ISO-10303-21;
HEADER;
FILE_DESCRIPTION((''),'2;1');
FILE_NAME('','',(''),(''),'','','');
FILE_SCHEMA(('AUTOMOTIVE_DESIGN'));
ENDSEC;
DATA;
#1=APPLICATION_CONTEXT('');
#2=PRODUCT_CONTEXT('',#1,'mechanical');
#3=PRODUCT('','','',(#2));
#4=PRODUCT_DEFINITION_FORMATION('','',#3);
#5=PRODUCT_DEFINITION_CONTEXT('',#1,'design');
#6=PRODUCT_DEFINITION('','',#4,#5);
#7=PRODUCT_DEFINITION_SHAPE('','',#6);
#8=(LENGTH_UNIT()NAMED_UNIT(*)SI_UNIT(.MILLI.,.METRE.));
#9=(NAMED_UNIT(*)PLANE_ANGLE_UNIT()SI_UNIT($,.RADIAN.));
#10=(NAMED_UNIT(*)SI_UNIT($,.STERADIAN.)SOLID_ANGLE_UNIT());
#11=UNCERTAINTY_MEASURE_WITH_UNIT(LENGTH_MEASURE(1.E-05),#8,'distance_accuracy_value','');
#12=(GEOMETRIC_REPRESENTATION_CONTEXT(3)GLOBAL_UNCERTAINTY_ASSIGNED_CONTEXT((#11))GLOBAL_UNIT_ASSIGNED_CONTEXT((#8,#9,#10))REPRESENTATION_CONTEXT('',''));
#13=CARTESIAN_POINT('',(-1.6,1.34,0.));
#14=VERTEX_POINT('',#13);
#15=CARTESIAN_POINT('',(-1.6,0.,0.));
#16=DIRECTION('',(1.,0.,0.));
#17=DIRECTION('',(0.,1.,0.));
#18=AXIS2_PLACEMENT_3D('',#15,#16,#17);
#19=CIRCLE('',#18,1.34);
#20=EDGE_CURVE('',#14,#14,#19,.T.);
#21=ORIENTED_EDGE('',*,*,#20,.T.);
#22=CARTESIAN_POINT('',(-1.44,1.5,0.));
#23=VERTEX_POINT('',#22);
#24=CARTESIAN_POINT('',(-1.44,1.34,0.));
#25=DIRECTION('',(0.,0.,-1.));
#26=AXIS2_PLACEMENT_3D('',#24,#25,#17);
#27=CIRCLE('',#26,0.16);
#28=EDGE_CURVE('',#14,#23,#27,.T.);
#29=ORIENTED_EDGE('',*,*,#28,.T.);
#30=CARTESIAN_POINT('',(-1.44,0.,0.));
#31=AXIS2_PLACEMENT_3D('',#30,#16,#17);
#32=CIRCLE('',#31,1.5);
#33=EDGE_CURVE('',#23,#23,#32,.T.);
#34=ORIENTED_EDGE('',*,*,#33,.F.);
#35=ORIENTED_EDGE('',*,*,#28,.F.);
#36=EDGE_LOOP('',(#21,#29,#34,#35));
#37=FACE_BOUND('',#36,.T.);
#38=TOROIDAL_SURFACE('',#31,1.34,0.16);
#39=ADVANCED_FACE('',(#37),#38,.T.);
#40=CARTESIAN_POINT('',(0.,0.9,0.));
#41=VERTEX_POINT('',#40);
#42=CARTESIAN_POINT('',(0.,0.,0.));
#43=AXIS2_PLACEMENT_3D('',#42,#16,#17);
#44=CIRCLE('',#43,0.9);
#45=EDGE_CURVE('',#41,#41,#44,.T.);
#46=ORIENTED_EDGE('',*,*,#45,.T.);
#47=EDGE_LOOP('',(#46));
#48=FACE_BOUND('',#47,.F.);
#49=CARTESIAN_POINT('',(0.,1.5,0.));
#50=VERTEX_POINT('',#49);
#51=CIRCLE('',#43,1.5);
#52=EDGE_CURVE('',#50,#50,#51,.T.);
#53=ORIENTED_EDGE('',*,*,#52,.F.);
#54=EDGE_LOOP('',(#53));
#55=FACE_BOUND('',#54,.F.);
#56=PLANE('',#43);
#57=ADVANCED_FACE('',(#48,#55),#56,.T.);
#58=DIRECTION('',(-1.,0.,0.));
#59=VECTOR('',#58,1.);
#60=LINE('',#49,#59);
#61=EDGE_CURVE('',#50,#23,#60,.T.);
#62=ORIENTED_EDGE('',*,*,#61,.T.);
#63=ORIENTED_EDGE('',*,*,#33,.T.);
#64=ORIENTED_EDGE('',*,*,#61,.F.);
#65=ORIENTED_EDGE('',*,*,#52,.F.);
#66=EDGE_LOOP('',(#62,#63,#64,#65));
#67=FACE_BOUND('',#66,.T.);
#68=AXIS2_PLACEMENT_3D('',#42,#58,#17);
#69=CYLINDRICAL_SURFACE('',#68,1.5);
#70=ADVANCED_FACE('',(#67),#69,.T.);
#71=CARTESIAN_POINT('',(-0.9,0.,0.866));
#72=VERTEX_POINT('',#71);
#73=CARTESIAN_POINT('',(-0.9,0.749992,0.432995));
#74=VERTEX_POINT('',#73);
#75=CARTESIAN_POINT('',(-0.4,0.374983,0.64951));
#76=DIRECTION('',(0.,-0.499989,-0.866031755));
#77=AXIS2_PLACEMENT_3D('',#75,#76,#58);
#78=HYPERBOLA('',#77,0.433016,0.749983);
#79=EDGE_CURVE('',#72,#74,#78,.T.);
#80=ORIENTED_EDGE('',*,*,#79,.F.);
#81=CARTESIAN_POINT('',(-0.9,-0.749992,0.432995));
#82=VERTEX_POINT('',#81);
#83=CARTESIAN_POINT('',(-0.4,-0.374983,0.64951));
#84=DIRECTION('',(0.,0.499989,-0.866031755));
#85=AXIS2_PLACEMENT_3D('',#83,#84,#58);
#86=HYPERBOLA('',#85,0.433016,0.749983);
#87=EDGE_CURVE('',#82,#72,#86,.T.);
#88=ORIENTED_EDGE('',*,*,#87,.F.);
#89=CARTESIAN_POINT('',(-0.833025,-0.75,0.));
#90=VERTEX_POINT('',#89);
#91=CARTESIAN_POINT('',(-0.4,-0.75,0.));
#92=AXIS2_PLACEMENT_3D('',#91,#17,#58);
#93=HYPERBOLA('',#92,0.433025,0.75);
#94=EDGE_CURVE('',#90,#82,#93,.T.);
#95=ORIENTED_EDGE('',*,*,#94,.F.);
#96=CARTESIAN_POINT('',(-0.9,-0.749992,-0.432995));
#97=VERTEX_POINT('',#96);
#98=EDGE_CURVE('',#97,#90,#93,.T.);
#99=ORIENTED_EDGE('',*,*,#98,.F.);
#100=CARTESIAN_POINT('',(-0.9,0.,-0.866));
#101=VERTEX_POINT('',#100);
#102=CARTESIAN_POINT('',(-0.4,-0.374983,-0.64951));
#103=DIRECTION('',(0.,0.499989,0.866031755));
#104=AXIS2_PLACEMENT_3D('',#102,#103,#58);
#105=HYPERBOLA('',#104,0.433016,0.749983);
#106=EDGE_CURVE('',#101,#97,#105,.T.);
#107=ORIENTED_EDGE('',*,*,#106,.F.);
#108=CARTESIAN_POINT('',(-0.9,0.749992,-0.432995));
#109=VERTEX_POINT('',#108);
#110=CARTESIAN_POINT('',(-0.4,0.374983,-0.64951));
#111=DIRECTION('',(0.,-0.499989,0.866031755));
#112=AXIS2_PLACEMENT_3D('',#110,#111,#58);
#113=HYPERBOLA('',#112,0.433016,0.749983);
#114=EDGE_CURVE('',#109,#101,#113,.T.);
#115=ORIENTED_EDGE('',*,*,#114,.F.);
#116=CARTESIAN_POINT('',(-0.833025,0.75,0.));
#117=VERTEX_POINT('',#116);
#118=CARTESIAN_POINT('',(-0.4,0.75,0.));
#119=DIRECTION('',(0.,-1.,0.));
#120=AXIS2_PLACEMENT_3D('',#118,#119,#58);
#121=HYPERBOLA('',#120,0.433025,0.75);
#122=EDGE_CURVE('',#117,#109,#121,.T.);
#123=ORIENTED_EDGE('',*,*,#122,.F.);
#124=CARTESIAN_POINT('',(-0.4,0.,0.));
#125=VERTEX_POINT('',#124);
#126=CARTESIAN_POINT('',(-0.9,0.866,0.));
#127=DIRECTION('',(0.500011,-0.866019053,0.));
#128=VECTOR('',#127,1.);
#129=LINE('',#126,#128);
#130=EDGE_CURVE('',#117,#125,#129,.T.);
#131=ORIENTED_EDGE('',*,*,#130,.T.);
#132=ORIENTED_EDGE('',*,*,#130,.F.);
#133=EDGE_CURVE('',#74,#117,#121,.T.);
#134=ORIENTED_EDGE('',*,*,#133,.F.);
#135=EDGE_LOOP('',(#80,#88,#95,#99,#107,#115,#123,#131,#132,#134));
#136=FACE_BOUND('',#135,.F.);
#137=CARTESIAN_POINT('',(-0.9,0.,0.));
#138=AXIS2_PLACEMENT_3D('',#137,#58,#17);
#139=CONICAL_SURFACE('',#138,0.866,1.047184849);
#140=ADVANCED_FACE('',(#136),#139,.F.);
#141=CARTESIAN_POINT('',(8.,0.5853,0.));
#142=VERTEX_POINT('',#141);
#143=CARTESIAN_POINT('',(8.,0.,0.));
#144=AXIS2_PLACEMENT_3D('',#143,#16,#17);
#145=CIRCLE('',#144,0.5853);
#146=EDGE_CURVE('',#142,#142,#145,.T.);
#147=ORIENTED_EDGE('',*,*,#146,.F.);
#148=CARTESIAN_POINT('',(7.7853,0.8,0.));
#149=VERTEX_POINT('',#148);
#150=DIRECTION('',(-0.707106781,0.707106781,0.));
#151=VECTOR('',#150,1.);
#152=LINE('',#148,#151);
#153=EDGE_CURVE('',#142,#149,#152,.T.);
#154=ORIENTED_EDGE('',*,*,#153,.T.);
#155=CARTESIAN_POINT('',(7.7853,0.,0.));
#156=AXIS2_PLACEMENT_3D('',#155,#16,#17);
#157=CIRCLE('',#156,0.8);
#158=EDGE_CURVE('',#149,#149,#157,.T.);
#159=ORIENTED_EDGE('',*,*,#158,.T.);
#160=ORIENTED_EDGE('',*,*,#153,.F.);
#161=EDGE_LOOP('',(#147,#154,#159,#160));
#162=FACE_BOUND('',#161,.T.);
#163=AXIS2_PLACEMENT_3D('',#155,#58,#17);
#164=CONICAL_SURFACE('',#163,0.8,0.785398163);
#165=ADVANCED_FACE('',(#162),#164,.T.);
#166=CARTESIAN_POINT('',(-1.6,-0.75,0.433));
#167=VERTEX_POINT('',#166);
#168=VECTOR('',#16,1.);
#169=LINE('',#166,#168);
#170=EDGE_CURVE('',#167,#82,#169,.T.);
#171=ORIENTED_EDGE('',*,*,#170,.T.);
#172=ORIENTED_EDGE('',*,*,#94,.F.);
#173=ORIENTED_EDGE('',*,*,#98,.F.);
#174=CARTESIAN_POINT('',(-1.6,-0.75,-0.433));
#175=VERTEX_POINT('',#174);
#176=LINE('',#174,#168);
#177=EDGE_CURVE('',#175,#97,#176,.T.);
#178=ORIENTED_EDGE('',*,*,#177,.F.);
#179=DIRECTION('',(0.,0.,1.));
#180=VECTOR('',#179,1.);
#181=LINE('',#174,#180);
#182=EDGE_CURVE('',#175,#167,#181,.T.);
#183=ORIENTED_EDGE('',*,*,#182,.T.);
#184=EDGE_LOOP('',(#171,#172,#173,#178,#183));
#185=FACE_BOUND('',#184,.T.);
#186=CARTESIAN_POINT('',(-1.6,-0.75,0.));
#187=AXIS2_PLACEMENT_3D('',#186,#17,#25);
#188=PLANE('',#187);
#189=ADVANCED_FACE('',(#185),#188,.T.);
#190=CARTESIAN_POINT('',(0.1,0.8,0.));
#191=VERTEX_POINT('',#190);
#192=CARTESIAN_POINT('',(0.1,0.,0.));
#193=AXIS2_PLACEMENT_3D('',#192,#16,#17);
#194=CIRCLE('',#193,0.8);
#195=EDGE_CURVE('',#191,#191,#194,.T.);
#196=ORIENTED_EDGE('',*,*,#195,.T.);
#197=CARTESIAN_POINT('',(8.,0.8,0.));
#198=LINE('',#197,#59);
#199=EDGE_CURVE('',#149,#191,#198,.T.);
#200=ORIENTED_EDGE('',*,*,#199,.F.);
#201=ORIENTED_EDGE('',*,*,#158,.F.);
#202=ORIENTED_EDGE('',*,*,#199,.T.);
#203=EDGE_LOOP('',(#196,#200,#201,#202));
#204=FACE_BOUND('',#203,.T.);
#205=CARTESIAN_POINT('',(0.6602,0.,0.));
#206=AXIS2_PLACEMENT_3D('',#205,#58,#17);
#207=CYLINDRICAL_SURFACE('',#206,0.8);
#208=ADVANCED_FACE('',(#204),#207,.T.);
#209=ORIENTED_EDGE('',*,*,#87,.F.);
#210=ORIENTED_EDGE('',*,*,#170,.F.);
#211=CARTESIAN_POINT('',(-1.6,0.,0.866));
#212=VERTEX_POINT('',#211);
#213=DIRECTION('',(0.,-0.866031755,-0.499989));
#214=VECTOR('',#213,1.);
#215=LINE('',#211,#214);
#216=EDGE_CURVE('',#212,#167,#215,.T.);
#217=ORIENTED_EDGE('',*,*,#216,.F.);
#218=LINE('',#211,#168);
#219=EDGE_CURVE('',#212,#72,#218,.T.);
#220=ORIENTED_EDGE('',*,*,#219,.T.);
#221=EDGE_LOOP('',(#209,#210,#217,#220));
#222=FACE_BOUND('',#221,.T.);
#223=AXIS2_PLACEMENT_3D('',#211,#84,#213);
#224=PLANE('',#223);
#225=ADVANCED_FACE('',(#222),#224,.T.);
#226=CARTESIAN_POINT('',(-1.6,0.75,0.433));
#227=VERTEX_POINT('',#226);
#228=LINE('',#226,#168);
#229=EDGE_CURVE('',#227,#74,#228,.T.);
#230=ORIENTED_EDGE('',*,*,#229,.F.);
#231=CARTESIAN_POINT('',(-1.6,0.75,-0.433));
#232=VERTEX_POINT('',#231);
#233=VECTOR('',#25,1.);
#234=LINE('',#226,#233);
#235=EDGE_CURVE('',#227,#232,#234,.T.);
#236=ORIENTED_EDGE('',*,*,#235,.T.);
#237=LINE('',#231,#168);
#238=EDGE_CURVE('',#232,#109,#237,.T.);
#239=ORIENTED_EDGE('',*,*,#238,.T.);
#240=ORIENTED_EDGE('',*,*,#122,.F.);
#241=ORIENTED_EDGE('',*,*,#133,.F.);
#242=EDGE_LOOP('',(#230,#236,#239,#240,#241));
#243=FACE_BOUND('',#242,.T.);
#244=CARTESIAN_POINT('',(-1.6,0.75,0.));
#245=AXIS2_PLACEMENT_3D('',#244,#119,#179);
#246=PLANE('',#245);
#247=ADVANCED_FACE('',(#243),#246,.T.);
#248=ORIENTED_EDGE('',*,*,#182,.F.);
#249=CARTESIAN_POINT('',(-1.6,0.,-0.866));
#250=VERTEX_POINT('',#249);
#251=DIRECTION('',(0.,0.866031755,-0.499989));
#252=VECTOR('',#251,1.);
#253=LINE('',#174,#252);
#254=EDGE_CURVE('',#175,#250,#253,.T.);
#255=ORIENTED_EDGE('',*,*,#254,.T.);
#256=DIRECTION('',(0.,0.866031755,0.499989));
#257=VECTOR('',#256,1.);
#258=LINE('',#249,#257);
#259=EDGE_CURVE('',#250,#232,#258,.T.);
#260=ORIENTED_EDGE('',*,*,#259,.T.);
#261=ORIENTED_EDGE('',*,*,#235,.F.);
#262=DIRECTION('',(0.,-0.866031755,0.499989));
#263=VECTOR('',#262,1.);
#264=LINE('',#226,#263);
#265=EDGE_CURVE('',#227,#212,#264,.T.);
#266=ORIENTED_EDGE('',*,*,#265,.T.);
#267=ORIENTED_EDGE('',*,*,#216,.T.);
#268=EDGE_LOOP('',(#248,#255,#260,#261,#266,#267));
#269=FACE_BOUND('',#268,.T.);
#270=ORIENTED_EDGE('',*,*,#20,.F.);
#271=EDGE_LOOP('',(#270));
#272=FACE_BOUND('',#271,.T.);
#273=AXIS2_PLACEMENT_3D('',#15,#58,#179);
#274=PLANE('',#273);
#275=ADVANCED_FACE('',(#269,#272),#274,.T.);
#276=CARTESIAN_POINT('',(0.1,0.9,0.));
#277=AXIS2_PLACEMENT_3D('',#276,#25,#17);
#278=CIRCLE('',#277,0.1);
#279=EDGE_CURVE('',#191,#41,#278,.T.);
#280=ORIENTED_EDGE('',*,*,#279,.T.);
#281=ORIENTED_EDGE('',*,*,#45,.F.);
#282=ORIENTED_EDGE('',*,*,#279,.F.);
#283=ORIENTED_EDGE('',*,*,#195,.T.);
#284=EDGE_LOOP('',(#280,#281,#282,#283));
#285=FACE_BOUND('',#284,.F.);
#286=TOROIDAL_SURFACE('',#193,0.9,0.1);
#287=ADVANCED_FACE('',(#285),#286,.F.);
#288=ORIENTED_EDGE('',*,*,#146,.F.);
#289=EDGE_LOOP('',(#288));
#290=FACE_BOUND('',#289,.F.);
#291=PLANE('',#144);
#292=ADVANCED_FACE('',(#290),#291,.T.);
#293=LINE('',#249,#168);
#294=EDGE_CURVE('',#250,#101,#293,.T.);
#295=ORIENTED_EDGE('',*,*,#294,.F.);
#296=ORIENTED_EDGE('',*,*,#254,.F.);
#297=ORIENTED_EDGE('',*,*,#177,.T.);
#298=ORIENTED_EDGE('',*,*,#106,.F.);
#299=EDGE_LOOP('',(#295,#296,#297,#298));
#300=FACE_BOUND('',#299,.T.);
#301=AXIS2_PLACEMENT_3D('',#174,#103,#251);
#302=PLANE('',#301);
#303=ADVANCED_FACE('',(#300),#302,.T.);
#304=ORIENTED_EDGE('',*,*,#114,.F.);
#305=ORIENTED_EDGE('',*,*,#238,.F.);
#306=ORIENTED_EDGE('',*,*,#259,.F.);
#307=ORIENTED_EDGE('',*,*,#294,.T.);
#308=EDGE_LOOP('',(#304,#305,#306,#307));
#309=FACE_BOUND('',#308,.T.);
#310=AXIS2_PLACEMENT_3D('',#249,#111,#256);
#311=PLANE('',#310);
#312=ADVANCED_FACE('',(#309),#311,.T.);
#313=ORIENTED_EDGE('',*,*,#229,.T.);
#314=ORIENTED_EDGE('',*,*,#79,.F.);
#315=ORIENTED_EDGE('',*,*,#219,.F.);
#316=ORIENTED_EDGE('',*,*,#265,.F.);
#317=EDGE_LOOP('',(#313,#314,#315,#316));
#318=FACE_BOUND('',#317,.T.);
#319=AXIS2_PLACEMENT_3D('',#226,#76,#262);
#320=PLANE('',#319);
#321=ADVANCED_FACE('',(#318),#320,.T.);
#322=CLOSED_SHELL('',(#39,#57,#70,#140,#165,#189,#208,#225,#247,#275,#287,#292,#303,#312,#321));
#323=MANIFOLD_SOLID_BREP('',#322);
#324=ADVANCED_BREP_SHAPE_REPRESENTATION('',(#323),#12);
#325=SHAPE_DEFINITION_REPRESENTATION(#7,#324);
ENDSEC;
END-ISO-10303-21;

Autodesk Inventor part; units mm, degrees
ref_plane "YZ Plane" through (0, 0, 0) normal (1, 0, 0) x (0, 1, 0)
ref_plane "XZ Plane" through (0, 0, 0) normal (0, 1, 0) x (-1, 0, 0)
sketch "Skizze1" plane through (0, 0, 0) normal (0, 0, 1) x (1, 0, 0)
  line L0 (-0.4, 0) -> (8, 0)
  line L1 (8, 0) -> (8, 0.8)
  line L2 (8, 0.8) -> (0.875, 0.8)
  line L3 (0.875, 0.8) -> (0.6602, 0.8)
  line L4 (0.6602, 0.8) -> (0, 0.8)
  line L5 (0, 0.8) -> (0, 1.5)
  line L6 (0, 1.5) -> (-1.6, 1.5)
  line L7 (-1.6, 1.5) -> (-1.6, 0.866)
  line L8 (-1.6, 0.866) -> (-0.9, 0.866)
  line L9 (-0.9, 0.866) -> (-0.4, 0)
  line L10 (-3.52, 0) -> (9.92, 0) projected
  line L11 (0, -0.3) -> (0, 1.8) projected
  line L12 (0.875, 0.8) -> (0, 0.8) construction
  dimension "d1" = 7.125
  dimension "d2" = 0.2148
  dimension "d3" = 1.6
  dimension "d4" = 0.7
  dimension "d5" = 60
  dimension "d6" = 1.6
  dimension "d7" = 1.6
  dimension "d8" = 1.7321
  dimension "d9" = 3
  dimension "d26" = 8
revolve "Körper" add sketch "Skizze1" angle 360 about axis through (-0.4, 0, 0) along (1, 0, 0)
sketch "Skizze2" plane through (-1.6, 0, 0) normal (-1, 0, 0) x (0, 0, 1)
  circle A0 centre (0, 0) radius 0.866 projected
  line L0 (0, -2.1) -> (0, 2.1) projected
  line L1 (-2.1, 0) -> (2.1, 0) projected
  line L2 (0.866, 0) -> (0.433, -0.75)
  line L3 (0.433, -0.75) -> (-0.433, -0.75)
  line L4 (-0.433, -0.75) -> (-0.866, 0)
  line L5 (-0.866, 0) -> (-0.433, 0.75)
  line L6 (-0.433, 0.75) -> (0.433, 0.75)
  line L7 (0.433, 0.75) -> (0.866, 0)
extrude "Loch" add sketch "Skizze2" against normal up to next contours L7 A0 | A0 L2 | L6 L0 A0 | A0 L0 L3 | L0 L6 A0 | A0 L3 L0 | L4 A0 | A0 L5
fillet "Rundung1" radius 0.16 1 edges at (-1.6, -1.5, 0)
thread "Gewinde" size "M1.6x0.35" class "6g" standard "ISO Metric profile" length 7.125
chamfer "Fase1" distance 0.2147 distance2 0.2147 1 edges at (8, -0.8, 0) measured on face at (8, 0.1996, -0.1768)
ref_plane "Work Plane1" through (29, 0, 0) normal (0, -1, 0) x (1, 0, 0)
fillet "Fillet2" radius 0.1 1 edges at (0, -0.8, 0)
equation "\"d1\" = GEL"
equation "\"d3\" = KOH"
equation "\"d4\" = INTI"
equation "\"d6\" = GD"
equation "\"d7\" = BDM"
equation "\"d8\" = 1.1547 * SW"
equation "\"d9\" = KOD"
equation "\"d26\" = NLG"
equation "\"d30\" = R"
equation "\"d17\" = RR"
equation "\"d13\" = GEL"
equation "\"d15\" = -0.5 * SPD + 0.5 * GD"
equation "\"d16\" = GUL"
equation "\"GD\" = 1.6"
equation "\"NLG\" = 8"
equation "\"GEL\" = 7.125"
equation "\"KOD\" = 3"
equation "\"KOH\" = 1.6"
equation "\"INTI\" = 0.7"
equation "\"GAL\" = 0.61345 * PTC"
equation "\"GUL\" = 0.61345 * PTC"
equation "\"BDM\" = NND"
equation "\"SW\" = 1.5"
equation "\"RR\" = 0.16"
equation "\"SPD\" = NND - 1.2269 * PTC"
equation "\"R\" = 0.1"
equation "\"TOA\" = 30deg"
equation "\"GD1\" = THREADDIA - 1.2269 * PTC"
equation "\"THREADDIA\" = 1.6"
equation "\"FAWI\" = 45deg"
equation "\"PTC\" = 0.35"
equation "\"NND\" = 1.6"
equation "\"E0\" = 1.155 * SW"
properties part number "ISO 4762 - M1,6 x 8" material "Edelstahl, 440C"
